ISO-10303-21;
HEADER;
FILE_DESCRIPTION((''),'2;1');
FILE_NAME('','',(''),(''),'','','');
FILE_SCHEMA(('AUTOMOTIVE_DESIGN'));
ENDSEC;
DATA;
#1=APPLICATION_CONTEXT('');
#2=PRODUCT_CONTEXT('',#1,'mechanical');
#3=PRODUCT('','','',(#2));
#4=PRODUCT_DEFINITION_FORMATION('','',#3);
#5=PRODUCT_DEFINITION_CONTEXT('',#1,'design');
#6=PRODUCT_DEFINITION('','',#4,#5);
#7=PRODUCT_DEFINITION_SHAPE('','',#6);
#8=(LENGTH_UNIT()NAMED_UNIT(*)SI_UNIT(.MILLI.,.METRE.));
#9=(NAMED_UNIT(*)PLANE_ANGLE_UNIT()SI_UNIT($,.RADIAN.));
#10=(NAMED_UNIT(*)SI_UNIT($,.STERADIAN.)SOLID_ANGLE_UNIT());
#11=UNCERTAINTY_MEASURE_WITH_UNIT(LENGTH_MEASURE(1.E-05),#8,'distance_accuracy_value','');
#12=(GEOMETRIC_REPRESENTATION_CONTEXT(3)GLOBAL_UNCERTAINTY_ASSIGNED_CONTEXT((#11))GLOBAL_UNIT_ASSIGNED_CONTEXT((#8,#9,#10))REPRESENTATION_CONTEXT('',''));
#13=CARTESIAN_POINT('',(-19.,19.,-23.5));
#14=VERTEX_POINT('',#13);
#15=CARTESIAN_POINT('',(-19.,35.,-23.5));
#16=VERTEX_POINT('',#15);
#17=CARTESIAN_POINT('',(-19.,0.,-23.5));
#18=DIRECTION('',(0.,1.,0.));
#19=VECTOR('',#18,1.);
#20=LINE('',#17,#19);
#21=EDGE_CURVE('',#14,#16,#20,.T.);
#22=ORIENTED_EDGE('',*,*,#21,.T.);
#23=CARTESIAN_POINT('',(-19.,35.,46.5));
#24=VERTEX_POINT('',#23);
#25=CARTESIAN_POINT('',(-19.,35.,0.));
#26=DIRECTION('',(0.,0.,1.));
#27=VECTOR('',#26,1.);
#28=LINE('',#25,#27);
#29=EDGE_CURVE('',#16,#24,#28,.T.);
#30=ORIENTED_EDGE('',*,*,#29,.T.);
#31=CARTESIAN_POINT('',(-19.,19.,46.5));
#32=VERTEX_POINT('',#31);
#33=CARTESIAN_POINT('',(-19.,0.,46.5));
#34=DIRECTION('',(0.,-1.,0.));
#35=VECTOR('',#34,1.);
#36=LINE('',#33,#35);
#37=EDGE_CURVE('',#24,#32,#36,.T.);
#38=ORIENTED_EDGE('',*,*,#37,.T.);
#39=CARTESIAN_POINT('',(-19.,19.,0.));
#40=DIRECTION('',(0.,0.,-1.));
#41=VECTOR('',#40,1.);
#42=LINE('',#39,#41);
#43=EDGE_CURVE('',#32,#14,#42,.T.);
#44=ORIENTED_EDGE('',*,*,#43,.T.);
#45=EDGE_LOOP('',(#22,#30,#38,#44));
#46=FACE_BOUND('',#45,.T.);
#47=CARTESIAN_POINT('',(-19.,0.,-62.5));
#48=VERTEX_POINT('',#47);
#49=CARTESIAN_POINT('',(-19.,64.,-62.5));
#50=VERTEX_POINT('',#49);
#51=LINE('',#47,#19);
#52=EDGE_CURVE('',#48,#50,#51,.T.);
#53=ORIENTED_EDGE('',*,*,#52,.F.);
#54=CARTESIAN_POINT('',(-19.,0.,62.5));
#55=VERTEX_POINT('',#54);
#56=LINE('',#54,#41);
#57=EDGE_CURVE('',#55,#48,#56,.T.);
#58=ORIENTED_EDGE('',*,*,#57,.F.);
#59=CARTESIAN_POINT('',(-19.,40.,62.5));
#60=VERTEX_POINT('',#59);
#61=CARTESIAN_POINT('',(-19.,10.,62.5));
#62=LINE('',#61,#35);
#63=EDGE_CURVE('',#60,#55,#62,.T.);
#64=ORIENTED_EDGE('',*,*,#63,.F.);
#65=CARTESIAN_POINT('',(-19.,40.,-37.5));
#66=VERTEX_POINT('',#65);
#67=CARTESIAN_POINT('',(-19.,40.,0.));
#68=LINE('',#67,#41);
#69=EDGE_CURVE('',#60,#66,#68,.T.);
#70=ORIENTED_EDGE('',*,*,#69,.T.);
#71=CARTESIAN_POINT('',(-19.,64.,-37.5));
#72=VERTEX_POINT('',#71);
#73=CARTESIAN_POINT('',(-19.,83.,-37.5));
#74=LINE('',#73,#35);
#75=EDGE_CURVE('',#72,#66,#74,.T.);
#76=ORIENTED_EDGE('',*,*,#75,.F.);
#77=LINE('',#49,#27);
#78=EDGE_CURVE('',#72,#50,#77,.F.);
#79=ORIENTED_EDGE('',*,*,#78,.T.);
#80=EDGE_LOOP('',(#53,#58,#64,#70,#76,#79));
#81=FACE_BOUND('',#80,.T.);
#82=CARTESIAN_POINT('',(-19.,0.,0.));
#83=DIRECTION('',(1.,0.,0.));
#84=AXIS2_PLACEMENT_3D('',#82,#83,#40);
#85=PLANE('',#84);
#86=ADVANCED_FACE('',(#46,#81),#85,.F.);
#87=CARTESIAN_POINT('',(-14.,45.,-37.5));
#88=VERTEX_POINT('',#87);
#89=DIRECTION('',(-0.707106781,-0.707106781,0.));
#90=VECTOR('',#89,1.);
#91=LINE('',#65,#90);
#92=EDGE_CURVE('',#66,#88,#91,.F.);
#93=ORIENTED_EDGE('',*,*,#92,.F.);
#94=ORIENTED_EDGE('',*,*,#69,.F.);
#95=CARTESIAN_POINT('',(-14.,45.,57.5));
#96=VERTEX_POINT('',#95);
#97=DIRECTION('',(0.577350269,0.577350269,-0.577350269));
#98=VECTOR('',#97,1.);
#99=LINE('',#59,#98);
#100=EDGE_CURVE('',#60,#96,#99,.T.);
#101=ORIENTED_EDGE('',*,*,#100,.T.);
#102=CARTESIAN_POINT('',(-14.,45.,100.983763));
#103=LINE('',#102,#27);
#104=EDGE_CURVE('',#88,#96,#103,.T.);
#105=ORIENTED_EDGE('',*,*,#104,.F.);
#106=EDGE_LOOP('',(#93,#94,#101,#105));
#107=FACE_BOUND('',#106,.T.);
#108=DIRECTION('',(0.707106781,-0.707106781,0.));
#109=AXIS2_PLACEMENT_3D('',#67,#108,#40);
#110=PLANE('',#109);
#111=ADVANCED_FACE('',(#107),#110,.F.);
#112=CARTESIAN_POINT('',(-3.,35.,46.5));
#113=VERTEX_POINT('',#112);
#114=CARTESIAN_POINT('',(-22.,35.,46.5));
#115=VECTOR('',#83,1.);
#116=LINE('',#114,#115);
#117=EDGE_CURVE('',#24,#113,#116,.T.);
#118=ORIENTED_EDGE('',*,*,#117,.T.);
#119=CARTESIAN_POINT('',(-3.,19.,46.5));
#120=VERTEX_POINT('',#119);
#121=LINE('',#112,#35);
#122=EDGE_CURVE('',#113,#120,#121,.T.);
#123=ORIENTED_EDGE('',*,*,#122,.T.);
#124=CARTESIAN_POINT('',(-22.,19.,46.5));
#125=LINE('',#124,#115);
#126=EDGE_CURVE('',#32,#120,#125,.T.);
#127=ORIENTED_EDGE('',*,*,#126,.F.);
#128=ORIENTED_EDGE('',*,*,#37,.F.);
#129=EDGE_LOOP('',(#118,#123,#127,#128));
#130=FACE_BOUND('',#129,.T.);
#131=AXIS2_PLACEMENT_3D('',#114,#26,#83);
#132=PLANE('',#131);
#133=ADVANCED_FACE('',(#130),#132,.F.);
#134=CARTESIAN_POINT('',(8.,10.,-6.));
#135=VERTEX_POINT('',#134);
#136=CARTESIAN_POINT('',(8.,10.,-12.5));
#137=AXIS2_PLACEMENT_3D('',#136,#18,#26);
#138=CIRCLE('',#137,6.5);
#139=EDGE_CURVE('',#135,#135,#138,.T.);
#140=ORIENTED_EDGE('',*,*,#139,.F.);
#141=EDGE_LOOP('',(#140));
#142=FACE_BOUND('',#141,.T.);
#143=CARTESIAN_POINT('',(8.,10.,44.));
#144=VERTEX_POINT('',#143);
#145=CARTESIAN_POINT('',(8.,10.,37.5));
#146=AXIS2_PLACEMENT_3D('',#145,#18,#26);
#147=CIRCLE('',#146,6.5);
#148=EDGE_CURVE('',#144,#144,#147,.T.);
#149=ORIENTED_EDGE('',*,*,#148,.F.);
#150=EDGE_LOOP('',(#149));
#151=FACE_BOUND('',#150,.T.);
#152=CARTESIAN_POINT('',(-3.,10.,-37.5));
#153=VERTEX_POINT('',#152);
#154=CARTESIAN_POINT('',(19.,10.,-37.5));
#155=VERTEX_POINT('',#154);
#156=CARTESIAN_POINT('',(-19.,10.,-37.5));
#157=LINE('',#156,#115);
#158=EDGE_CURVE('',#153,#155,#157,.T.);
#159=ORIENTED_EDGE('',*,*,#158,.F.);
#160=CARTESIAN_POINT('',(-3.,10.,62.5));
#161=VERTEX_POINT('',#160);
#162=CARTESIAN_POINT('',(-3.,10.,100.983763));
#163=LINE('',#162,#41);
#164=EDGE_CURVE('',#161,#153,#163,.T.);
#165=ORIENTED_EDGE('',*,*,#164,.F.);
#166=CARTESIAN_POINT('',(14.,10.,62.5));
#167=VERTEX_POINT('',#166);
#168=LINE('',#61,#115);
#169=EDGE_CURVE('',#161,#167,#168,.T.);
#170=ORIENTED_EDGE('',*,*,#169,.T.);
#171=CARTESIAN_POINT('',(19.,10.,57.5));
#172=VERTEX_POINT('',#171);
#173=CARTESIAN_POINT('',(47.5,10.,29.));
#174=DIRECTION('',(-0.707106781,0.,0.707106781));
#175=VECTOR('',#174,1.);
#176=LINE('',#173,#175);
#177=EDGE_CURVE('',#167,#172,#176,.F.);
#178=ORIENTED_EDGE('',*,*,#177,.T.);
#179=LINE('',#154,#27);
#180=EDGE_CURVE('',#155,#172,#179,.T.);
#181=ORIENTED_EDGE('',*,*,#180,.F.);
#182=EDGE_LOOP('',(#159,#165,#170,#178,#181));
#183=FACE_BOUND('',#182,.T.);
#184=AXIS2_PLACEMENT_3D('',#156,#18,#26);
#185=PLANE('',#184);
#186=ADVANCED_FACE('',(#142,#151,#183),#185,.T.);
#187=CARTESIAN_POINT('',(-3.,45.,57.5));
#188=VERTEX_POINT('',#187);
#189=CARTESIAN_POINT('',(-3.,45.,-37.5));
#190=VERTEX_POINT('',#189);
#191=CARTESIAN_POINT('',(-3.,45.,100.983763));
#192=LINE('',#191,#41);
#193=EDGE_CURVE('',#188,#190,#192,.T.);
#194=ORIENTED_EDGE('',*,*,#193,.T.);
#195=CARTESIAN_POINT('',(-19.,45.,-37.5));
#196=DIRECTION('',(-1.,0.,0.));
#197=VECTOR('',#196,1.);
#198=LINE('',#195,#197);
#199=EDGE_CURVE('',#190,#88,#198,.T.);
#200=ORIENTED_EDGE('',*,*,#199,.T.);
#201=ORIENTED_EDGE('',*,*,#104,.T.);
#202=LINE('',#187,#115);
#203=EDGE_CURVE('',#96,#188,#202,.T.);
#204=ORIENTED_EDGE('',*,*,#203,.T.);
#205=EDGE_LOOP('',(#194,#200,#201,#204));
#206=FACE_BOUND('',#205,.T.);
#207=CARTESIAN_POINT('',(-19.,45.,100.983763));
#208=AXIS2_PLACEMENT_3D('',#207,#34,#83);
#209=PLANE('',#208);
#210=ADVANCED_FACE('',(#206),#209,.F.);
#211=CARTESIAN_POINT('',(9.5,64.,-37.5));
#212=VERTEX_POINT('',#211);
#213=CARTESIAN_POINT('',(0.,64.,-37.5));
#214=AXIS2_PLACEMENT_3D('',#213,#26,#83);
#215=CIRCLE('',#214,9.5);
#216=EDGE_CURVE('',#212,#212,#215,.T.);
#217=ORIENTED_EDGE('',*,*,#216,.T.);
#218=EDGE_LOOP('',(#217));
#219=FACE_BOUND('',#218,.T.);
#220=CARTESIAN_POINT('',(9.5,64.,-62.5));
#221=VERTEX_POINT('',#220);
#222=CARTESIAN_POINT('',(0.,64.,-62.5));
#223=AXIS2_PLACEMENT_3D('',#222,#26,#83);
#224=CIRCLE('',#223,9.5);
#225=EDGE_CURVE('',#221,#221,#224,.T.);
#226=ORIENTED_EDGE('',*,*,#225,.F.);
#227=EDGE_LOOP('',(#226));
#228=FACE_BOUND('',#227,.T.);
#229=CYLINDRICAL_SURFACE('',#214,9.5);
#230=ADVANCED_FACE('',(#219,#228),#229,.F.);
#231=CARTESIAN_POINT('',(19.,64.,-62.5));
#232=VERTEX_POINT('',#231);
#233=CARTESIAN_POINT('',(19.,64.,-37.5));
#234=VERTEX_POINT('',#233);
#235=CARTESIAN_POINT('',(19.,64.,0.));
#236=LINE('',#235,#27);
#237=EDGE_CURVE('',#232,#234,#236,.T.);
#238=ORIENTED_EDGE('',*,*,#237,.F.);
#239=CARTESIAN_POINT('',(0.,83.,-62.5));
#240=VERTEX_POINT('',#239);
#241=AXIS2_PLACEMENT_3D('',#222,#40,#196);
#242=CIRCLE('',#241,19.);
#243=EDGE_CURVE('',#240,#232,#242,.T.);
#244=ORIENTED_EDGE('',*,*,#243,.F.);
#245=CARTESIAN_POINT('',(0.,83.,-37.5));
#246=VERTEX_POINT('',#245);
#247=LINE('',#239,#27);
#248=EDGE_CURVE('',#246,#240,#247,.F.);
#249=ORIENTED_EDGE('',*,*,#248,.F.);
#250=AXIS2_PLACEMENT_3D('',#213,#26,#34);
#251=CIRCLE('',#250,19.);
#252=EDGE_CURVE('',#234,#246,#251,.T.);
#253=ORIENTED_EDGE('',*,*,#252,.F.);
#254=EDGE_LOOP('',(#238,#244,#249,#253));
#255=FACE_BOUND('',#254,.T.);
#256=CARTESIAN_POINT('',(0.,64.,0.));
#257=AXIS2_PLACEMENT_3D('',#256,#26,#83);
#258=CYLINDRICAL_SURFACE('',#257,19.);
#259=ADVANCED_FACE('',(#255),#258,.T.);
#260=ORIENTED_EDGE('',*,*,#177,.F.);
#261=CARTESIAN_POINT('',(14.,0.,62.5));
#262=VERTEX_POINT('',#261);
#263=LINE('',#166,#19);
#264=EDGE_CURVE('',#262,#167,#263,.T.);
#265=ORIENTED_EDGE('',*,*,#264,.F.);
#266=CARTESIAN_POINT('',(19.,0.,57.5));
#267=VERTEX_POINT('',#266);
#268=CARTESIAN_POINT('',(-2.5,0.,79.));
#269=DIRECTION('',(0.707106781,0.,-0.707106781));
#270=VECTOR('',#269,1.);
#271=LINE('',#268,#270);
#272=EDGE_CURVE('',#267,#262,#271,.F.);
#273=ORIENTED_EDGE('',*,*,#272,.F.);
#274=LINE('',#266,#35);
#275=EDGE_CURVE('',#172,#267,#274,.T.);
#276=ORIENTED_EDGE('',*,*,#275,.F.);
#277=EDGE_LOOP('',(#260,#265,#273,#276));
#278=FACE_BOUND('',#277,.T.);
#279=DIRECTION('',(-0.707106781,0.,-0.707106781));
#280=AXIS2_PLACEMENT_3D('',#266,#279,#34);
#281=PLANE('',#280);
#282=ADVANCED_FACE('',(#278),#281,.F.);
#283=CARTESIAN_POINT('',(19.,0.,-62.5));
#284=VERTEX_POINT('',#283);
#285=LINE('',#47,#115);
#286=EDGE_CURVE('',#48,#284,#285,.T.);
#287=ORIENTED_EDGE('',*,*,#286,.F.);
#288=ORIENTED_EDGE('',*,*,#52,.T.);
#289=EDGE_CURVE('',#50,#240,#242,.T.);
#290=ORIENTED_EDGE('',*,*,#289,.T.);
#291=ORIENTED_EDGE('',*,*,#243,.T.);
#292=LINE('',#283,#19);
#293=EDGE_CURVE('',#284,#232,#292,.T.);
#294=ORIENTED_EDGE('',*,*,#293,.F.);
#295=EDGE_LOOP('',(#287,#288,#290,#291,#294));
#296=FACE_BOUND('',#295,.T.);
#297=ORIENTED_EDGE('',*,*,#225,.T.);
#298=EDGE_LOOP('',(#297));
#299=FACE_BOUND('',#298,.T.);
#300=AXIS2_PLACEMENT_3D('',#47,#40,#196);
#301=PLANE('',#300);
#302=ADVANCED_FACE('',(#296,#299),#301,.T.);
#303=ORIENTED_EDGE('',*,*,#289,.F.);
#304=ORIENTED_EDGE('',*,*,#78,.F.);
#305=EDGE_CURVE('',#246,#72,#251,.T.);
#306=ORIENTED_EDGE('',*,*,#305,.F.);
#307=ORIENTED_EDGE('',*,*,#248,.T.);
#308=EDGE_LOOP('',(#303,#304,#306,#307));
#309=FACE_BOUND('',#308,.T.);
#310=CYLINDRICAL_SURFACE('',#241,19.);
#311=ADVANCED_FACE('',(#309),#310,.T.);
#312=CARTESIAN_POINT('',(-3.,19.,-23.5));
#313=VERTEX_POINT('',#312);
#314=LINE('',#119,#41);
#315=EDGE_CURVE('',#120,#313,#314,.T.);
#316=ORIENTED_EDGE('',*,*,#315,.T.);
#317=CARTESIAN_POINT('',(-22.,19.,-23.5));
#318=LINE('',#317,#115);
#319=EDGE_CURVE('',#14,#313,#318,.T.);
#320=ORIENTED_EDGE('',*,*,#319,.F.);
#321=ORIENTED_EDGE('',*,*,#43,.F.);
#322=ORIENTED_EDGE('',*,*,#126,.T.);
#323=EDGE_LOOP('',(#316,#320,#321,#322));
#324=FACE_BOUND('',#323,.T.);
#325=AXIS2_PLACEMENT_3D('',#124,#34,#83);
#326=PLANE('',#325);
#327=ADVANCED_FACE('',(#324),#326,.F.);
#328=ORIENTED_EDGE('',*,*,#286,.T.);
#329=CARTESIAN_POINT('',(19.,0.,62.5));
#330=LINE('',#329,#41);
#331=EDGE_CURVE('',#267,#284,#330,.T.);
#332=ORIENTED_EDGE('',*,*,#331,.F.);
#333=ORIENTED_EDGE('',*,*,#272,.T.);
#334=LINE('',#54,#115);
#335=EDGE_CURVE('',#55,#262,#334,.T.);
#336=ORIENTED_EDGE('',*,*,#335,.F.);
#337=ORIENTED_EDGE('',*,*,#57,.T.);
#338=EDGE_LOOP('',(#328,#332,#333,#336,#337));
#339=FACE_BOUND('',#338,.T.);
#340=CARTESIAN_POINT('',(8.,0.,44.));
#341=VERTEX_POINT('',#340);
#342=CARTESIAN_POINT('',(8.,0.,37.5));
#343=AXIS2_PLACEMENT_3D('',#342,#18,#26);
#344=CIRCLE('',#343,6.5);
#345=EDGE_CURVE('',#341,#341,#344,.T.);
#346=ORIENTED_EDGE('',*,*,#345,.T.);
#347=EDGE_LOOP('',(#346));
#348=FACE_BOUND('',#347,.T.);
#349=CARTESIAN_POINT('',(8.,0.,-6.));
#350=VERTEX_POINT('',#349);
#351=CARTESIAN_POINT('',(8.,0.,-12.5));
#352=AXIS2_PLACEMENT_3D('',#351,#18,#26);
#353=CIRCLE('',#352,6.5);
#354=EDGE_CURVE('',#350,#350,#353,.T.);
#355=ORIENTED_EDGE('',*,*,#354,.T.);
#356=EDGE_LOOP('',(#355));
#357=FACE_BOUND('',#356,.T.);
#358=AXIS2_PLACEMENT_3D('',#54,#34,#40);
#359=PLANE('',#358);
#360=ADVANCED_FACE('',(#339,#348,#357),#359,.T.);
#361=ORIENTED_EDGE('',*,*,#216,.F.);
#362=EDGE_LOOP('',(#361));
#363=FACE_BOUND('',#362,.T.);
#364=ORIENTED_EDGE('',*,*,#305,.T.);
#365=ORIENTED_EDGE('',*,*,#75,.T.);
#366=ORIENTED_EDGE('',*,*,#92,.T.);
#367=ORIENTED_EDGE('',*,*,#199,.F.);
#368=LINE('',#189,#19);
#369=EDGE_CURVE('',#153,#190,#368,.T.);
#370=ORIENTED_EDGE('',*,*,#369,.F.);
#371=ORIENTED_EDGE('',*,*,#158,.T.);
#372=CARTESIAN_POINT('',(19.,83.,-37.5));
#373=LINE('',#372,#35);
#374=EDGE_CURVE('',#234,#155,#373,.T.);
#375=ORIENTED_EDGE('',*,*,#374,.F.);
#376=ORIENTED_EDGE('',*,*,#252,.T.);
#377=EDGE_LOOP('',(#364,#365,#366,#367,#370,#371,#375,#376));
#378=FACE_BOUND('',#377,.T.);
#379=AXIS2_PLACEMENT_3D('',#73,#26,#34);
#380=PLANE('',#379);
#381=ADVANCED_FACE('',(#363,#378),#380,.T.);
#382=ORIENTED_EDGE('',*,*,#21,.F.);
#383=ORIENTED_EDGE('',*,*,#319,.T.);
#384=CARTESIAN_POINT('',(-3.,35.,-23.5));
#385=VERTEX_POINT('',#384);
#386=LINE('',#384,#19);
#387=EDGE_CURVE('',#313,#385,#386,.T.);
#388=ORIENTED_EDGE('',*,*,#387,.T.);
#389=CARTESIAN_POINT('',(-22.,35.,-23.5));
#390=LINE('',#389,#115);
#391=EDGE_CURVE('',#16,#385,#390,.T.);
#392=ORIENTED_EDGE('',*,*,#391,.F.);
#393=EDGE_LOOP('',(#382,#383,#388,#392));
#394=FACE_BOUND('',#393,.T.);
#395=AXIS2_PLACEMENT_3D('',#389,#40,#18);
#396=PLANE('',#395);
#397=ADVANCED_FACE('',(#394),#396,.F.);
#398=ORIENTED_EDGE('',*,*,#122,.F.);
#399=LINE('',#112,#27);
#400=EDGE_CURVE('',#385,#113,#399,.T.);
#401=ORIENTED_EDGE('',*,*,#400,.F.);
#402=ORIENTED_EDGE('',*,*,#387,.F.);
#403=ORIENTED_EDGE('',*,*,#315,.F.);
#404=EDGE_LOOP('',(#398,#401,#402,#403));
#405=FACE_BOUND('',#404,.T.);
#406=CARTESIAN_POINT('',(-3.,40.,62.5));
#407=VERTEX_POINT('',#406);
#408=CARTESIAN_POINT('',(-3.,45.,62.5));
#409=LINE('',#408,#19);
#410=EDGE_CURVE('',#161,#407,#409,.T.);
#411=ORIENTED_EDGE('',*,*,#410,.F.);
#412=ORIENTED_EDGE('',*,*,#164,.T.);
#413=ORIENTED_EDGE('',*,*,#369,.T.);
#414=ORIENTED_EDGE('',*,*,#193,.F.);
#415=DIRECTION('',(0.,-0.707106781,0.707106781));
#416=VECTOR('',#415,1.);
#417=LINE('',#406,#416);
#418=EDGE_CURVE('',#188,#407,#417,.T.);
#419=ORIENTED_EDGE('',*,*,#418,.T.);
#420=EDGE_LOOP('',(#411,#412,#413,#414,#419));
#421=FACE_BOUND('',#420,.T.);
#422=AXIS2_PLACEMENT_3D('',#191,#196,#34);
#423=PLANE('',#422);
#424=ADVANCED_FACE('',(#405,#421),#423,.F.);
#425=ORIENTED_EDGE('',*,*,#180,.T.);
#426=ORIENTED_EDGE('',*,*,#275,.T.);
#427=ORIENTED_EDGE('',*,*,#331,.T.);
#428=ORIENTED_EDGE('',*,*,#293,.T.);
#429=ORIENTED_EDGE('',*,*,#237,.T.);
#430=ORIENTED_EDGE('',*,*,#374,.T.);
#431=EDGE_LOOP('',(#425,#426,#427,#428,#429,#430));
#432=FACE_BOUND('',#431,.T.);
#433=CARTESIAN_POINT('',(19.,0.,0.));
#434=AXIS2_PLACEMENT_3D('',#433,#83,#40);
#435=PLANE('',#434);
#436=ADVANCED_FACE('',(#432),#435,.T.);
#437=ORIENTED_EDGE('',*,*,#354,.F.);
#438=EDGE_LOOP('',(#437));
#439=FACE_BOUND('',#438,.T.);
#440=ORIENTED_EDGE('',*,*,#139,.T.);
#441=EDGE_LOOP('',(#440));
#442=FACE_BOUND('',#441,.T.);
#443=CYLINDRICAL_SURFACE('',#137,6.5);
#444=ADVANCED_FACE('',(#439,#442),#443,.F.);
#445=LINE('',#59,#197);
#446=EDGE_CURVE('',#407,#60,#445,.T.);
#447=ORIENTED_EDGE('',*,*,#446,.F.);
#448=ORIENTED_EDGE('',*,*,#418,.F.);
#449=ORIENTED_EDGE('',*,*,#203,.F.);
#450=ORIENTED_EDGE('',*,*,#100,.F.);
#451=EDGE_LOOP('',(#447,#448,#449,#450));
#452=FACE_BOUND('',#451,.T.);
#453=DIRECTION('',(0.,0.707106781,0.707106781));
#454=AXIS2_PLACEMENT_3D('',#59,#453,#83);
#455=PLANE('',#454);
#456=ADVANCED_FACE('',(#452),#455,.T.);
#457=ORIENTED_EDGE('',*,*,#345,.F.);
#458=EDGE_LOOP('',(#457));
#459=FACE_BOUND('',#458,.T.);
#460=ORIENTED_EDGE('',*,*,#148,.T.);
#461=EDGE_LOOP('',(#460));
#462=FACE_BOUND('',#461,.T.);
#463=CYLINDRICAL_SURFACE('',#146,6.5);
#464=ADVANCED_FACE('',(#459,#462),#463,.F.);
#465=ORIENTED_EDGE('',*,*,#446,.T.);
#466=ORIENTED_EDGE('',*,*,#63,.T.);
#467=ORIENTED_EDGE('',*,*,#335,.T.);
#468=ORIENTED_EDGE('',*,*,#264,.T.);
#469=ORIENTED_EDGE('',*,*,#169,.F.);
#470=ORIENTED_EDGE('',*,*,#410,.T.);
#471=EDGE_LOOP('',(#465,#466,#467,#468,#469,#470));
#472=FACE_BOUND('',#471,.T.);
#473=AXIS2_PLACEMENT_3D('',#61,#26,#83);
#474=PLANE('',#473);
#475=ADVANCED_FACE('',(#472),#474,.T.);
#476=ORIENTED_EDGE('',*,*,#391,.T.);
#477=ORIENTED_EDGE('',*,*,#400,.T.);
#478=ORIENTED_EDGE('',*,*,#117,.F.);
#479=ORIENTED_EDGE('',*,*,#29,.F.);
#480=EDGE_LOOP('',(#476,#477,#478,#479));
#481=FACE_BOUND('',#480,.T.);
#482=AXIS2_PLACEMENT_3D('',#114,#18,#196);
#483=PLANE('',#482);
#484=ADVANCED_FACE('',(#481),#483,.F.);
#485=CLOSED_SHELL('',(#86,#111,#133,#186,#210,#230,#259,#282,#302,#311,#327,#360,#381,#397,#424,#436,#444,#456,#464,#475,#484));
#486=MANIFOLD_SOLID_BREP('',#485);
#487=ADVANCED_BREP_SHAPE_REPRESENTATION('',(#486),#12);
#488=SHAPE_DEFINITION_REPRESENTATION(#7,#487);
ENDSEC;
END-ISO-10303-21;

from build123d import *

# Parameters (mm, degrees)
BOSS_EXTRUDE1_DEPTH      = 19
BOSS_EXTRUDE1_DEPTH_BACK = 19
SKETCH2_W                = 16
SKETCH2_H                = 35
BOSS_EXTRUDE2_DEPTH      = 100
FILLET1_R                = 19
HOLE1_D                  = 19
CHAMFER1_SIZE            = 5
CHAMFER2_SIZE            = 5
SKETCH6_W                = 70
SKETCH6_H                = 16
CUT_EXTRUDE1_DEPTH       = 19
HOLE2_D                  = 13


with BuildPart() as part:
    # Sketch1 → Boss-Extrude1 (new, two sides: drawn at the far end of the back side and taken through both)
    with BuildSketch(Plane(origin=(0, 0, 0), x_dir=(0, 0, -1), z_dir=(1, 0, 0)).offset(-BOSS_EXTRUDE1_DEPTH_BACK)):
        Polygon((-62.5, 0), (62.5, 0), (62.5, 83), (37.5, 83), (37.5, 10), (-62.5, 10), align=None)
    extrude(amount=BOSS_EXTRUDE1_DEPTH + BOSS_EXTRUDE1_DEPTH_BACK)

    # Sketch2 → Boss-Extrude2 (add)
    with BuildSketch(Plane.XY.offset(-37.5)):
        with Locations((-11, 27.5)):
            Rectangle(SKETCH2_W, SKETCH2_H)
    extrude(amount=BOSS_EXTRUDE2_DEPTH)

    # Fillet1
    fillet1_edges = [part.edges().sort_by_distance(p)[0] for p in [
        (-19, 83, -50),
        (19, 83, -50),
    ]]
    fillet(fillet1_edges, radius=FILLET1_R - 0.0001)  # a hair under: the kernel refuses the full size

    # Hole1 (through all)
    with Locations(Plane.XY.offset(-37.5)):
        with Locations((0, 64)):
            Hole(HOLE1_D / 2)

    # Chamfer1
    chamfer1_edges = [part.edges().sort_by_distance(p)[0] for p in [
        (-19, 45, 12.5),
        (-11, 45, 62.5),
    ]]
    chamfer(chamfer1_edges, length=CHAMFER1_SIZE)

    # Chamfer2
    chamfer2_edges = [part.edges().sort_by_distance(p)[0] for p in [
        (19, 5, 62.5),
    ]]
    chamfer(chamfer2_edges, length=CHAMFER2_SIZE)

    # Sketch6 → Cut-Extrude1 (cut)
    with BuildSketch(Plane(origin=(-3, 0, 0), x_dir=(0, 0, -1), z_dir=(1, 0, 0))):
        with Locations((-11.5, 27)):
            Rectangle(SKETCH6_W, SKETCH6_H)
    extrude(amount=-CUT_EXTRUDE1_DEPTH, mode=Mode.SUBTRACT)

    # Hole2 (through all)
    with Locations(Plane(origin=(0, 10, 0), x_dir=(1, 0, 0), z_dir=(0, 1, 0))):
        with Locations((8, 12.5), (8, -37.5)):
            Hole(HOLE2_D / 2)


solid = part.part
